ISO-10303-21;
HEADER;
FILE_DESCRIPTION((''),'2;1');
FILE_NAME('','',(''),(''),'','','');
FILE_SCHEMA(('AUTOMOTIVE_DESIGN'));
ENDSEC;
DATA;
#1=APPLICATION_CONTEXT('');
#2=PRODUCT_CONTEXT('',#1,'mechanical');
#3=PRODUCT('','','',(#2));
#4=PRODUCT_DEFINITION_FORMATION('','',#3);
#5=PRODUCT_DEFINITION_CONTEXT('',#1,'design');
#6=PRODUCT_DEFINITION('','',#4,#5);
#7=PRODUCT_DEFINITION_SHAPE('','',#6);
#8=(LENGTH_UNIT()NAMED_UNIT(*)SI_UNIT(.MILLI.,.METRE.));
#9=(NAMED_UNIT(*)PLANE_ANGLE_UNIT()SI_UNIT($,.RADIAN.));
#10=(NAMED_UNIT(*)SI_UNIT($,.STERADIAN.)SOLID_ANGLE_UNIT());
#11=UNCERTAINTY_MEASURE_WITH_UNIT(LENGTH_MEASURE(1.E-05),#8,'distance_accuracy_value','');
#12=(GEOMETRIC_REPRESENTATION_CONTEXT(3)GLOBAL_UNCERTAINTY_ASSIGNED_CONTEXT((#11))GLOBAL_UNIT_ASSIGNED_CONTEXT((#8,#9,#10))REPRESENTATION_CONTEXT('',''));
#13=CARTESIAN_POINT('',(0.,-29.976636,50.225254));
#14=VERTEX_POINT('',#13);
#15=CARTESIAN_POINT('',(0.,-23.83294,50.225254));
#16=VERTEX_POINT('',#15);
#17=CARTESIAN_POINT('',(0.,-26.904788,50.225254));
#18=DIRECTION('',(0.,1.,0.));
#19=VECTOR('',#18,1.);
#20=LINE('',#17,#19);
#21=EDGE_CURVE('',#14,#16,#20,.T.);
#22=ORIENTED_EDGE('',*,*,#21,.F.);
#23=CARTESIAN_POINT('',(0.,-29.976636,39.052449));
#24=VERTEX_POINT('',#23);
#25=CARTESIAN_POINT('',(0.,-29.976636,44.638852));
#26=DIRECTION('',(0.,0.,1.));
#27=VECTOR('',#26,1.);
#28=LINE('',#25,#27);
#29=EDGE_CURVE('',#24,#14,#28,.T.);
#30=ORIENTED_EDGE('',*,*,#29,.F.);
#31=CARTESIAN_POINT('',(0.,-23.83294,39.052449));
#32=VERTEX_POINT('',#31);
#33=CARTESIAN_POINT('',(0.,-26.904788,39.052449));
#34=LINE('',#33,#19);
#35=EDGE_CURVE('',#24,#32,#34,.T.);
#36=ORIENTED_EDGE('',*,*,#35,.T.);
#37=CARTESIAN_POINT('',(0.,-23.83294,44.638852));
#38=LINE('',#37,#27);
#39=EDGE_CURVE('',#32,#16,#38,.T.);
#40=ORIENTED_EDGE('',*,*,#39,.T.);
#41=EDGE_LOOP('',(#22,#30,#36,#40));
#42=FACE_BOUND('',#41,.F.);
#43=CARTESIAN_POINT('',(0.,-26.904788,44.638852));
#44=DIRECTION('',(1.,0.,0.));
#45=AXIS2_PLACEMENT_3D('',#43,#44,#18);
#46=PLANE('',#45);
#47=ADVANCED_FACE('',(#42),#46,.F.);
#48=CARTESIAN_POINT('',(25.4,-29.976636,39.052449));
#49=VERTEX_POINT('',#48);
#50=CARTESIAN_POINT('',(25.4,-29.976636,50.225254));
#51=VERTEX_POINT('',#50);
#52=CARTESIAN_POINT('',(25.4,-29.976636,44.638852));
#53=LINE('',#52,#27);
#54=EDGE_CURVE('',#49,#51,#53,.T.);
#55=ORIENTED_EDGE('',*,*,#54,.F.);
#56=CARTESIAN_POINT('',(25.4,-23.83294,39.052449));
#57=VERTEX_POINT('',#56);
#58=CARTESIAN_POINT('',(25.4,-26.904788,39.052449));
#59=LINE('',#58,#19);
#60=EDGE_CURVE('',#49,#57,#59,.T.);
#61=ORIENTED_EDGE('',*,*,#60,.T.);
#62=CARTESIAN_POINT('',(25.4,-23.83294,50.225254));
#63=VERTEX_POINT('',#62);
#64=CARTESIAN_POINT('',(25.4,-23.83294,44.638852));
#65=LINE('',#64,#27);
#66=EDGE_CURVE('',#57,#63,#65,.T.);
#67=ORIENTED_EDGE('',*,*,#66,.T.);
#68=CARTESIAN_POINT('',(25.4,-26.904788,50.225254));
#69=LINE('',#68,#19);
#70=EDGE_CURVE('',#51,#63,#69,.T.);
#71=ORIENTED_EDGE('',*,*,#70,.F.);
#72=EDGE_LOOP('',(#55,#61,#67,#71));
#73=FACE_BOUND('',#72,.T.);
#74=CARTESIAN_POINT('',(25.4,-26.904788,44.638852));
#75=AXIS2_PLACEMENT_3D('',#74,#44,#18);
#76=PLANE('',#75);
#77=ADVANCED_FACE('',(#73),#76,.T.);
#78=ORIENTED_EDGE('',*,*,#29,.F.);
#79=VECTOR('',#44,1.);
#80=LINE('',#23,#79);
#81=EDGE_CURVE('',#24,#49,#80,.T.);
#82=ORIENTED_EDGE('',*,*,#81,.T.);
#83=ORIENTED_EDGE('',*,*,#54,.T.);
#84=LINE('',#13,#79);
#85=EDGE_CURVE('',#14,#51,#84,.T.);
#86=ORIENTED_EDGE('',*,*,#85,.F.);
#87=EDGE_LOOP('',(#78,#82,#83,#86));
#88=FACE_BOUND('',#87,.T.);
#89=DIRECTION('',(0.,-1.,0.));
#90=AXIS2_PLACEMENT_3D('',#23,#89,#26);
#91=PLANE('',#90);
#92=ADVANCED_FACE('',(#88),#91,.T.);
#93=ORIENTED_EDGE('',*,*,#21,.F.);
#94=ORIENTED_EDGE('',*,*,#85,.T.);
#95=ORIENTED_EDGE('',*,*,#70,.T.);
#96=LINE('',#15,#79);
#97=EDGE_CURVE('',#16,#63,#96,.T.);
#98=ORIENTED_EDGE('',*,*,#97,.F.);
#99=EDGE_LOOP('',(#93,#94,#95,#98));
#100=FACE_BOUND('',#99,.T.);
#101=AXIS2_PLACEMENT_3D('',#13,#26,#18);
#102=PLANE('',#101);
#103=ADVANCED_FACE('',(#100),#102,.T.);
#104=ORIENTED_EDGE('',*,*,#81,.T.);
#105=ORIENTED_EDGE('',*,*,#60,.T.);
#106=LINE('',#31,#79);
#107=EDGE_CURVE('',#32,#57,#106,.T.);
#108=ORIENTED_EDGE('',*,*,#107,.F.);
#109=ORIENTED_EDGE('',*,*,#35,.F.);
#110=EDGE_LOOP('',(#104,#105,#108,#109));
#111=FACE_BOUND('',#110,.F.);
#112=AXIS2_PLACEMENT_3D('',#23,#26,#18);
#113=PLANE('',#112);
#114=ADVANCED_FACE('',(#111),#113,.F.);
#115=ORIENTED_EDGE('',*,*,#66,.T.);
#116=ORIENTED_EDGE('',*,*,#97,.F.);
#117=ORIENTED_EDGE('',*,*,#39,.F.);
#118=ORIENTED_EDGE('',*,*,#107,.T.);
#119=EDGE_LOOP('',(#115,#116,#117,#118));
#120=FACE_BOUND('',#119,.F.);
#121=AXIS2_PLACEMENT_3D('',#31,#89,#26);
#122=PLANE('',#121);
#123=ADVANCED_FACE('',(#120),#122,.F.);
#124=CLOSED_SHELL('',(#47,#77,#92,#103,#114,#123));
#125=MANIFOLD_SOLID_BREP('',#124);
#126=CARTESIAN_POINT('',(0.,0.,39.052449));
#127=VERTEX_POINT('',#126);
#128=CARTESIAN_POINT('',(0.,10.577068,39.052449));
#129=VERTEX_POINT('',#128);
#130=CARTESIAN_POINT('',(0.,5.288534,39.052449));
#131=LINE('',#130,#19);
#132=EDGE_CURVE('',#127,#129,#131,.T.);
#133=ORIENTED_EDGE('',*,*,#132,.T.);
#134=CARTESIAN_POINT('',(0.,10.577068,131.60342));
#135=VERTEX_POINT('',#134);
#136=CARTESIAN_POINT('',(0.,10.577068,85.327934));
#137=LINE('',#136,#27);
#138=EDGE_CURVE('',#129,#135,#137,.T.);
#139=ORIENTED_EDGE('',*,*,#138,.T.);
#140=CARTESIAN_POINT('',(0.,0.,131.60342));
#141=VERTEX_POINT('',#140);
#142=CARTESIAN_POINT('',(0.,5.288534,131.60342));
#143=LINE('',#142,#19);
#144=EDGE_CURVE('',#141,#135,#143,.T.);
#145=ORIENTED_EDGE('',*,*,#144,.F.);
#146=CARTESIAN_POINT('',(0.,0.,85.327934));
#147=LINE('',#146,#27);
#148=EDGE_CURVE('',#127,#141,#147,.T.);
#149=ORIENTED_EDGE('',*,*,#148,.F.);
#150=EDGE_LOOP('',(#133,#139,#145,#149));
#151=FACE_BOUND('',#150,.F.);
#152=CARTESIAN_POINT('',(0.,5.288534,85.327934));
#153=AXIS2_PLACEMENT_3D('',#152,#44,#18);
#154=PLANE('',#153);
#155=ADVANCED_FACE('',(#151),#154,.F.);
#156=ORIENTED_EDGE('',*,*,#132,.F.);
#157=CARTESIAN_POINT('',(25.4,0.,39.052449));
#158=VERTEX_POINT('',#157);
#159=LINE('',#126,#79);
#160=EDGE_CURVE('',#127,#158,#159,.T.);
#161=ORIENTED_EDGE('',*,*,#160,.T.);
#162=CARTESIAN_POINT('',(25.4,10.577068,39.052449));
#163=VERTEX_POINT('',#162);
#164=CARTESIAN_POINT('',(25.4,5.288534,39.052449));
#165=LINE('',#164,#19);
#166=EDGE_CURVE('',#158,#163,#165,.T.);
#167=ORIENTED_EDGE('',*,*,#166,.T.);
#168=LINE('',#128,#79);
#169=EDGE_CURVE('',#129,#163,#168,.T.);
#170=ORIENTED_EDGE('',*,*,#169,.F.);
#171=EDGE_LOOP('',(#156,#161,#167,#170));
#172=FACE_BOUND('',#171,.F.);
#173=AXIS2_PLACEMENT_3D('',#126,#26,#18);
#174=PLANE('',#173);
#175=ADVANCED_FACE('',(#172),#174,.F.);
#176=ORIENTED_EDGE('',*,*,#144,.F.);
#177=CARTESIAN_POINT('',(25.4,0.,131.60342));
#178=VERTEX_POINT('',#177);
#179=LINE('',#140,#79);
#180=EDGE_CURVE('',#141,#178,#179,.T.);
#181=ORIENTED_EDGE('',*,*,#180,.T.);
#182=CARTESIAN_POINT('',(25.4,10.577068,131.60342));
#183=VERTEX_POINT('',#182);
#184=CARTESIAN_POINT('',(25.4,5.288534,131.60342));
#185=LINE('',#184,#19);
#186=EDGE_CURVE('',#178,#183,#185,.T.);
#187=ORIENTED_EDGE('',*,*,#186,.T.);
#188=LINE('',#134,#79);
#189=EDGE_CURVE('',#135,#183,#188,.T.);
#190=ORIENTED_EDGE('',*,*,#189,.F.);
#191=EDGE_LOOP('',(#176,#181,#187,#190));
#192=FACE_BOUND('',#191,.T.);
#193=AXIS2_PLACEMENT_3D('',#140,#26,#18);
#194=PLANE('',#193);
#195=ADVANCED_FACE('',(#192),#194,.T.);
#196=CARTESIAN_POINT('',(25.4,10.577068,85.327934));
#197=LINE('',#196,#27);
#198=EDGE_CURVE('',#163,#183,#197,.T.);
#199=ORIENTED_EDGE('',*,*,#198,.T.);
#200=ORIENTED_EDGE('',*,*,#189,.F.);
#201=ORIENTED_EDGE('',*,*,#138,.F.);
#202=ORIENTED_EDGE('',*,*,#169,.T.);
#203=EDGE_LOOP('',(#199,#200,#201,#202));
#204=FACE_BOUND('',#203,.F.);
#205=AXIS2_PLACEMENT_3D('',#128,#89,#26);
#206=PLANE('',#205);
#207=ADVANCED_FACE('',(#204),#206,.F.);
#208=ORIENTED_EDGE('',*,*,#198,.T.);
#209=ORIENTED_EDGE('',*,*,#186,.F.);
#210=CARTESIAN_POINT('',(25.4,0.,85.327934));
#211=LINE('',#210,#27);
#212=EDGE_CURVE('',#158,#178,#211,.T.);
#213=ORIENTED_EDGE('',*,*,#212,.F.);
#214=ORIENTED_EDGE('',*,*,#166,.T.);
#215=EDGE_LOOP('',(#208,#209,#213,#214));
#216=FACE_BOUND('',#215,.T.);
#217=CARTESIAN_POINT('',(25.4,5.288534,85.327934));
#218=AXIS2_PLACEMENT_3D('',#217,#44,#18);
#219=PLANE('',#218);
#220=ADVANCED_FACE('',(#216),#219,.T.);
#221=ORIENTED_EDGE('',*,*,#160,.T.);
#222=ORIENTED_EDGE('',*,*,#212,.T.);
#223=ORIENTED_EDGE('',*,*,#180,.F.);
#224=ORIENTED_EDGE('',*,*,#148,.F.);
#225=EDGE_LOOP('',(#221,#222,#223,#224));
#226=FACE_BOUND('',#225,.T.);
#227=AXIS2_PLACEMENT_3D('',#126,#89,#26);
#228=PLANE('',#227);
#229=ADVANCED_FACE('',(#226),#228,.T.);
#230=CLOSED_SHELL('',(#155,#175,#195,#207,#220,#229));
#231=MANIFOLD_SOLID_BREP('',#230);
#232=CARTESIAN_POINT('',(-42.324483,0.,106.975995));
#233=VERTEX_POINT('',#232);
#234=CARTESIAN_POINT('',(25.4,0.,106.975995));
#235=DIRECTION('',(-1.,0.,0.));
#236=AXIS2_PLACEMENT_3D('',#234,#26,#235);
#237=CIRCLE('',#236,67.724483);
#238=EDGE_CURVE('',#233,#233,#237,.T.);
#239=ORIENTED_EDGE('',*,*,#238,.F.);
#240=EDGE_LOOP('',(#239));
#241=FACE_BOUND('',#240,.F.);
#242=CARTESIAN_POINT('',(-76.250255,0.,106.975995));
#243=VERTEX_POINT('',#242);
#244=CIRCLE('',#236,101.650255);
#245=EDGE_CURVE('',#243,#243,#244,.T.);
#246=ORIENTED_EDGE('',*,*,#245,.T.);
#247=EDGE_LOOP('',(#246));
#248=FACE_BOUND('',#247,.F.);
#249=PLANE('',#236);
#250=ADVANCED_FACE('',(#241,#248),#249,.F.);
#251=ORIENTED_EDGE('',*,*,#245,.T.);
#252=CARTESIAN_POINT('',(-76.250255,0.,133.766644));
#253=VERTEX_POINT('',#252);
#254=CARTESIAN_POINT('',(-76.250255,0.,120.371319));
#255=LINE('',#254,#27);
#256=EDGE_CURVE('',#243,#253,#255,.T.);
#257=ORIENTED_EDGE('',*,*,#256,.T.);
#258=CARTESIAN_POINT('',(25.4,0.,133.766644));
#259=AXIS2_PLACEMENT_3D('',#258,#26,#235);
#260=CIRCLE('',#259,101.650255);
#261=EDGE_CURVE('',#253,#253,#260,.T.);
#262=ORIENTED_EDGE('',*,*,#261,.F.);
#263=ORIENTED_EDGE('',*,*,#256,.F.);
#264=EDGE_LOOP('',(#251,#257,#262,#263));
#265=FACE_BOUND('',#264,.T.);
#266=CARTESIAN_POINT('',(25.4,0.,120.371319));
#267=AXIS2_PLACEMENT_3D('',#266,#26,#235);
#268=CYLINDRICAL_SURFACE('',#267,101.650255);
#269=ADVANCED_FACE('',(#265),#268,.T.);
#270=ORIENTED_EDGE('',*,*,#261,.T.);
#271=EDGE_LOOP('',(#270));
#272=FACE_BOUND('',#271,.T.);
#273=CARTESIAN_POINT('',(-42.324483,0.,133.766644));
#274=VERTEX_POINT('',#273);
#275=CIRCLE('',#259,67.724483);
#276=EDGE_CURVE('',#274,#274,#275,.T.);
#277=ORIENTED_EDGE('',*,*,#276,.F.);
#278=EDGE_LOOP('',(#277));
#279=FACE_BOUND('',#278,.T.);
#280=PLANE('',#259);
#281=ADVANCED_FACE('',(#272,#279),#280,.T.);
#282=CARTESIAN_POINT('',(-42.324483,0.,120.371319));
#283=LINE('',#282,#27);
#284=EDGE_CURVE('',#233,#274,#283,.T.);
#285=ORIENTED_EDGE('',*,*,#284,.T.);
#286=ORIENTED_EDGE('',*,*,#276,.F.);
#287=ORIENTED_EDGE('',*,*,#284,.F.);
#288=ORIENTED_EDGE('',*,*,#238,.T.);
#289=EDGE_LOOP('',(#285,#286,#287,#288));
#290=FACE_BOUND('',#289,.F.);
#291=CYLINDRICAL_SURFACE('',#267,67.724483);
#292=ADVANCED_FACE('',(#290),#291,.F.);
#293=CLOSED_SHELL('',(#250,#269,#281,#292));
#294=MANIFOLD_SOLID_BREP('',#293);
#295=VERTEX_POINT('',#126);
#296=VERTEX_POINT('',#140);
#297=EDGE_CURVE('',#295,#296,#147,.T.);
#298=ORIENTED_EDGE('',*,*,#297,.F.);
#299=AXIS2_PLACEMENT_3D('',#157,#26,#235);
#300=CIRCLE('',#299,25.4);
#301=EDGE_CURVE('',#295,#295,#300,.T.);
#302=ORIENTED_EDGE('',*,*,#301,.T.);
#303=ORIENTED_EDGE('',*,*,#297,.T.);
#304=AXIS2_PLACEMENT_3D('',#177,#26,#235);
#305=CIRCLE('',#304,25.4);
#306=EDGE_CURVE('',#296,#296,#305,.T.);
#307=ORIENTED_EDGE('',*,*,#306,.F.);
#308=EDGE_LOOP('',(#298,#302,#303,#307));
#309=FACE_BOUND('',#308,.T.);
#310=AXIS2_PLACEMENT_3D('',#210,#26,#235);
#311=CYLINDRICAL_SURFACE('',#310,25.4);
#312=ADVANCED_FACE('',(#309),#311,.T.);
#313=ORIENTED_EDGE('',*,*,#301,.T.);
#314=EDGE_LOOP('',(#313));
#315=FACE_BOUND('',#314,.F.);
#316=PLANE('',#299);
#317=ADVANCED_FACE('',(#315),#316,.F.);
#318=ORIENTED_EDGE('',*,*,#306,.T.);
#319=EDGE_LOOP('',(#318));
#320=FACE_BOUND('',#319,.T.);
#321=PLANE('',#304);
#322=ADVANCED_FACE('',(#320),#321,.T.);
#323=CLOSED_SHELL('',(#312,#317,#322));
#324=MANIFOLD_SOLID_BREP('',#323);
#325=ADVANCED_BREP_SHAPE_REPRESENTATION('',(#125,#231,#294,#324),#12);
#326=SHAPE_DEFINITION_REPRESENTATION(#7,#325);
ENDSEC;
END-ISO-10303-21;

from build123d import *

# Parameters (mm, degrees)
F0_W      = 6.1436966062
F0_H      = 11.1728049815
F1_DEPTH  = 25.4
F0_W_2    = 10.5770677328
F0_H_2    = 92.550970614
F4_W      = 33.9257717133
F4_H      = 26.7906486988
F1_FACE_W = 25.4
F1_FACE_H = 92.550970614


# Not quite as in the source:
# - the program builds the solid bodies; features that only make, move or delete a surface that nothing else refers to are left out


with BuildPart() as f1:
    # F0 (on Right) → F1 (new body)
    with BuildSketch(Plane.YZ):
        with Locations((-26.9047878683, 44.6388516575)):
            Rectangle(F0_W, F0_H)
    extrude(amount=F1_DEPTH)


with BuildPart() as f1b:
    # F0 (on Right) → F1, piece 2 (new body)
    with BuildSketch(Plane.YZ):
        with Locations((5.2885338664, 85.3279344738)):
            Rectangle(F0_W_2, F0_H_2)
    extrude(amount=F1_DEPTH)


with BuildPart() as f5:
    # F4 (on Front) → F5 (revolve)
    with BuildSketch(Plane.XZ):
        with Locations((-59.2873692513, 120.3713193536)):
            Rectangle(F4_W, F4_H)
    revolve(axis=Axis((25.4, 0, 85.3279344738), (0, 0, 1)))


with BuildPart() as f5b:
    # F1_face (on face) → F5, piece 2 (revolve)
    with BuildSketch(Plane(origin=(12.7, 0, 85.3279344738), x_dir=(1, 0, 0), z_dir=(0, -1, 0))):
        Rectangle(F1_FACE_W, F1_FACE_H)
    revolve(axis=Axis((25.4, 0, 85.3279344738), (0, 0, 1)))


solid = Compound([f1.part, f1b.part, f5.part, f5b.part])
